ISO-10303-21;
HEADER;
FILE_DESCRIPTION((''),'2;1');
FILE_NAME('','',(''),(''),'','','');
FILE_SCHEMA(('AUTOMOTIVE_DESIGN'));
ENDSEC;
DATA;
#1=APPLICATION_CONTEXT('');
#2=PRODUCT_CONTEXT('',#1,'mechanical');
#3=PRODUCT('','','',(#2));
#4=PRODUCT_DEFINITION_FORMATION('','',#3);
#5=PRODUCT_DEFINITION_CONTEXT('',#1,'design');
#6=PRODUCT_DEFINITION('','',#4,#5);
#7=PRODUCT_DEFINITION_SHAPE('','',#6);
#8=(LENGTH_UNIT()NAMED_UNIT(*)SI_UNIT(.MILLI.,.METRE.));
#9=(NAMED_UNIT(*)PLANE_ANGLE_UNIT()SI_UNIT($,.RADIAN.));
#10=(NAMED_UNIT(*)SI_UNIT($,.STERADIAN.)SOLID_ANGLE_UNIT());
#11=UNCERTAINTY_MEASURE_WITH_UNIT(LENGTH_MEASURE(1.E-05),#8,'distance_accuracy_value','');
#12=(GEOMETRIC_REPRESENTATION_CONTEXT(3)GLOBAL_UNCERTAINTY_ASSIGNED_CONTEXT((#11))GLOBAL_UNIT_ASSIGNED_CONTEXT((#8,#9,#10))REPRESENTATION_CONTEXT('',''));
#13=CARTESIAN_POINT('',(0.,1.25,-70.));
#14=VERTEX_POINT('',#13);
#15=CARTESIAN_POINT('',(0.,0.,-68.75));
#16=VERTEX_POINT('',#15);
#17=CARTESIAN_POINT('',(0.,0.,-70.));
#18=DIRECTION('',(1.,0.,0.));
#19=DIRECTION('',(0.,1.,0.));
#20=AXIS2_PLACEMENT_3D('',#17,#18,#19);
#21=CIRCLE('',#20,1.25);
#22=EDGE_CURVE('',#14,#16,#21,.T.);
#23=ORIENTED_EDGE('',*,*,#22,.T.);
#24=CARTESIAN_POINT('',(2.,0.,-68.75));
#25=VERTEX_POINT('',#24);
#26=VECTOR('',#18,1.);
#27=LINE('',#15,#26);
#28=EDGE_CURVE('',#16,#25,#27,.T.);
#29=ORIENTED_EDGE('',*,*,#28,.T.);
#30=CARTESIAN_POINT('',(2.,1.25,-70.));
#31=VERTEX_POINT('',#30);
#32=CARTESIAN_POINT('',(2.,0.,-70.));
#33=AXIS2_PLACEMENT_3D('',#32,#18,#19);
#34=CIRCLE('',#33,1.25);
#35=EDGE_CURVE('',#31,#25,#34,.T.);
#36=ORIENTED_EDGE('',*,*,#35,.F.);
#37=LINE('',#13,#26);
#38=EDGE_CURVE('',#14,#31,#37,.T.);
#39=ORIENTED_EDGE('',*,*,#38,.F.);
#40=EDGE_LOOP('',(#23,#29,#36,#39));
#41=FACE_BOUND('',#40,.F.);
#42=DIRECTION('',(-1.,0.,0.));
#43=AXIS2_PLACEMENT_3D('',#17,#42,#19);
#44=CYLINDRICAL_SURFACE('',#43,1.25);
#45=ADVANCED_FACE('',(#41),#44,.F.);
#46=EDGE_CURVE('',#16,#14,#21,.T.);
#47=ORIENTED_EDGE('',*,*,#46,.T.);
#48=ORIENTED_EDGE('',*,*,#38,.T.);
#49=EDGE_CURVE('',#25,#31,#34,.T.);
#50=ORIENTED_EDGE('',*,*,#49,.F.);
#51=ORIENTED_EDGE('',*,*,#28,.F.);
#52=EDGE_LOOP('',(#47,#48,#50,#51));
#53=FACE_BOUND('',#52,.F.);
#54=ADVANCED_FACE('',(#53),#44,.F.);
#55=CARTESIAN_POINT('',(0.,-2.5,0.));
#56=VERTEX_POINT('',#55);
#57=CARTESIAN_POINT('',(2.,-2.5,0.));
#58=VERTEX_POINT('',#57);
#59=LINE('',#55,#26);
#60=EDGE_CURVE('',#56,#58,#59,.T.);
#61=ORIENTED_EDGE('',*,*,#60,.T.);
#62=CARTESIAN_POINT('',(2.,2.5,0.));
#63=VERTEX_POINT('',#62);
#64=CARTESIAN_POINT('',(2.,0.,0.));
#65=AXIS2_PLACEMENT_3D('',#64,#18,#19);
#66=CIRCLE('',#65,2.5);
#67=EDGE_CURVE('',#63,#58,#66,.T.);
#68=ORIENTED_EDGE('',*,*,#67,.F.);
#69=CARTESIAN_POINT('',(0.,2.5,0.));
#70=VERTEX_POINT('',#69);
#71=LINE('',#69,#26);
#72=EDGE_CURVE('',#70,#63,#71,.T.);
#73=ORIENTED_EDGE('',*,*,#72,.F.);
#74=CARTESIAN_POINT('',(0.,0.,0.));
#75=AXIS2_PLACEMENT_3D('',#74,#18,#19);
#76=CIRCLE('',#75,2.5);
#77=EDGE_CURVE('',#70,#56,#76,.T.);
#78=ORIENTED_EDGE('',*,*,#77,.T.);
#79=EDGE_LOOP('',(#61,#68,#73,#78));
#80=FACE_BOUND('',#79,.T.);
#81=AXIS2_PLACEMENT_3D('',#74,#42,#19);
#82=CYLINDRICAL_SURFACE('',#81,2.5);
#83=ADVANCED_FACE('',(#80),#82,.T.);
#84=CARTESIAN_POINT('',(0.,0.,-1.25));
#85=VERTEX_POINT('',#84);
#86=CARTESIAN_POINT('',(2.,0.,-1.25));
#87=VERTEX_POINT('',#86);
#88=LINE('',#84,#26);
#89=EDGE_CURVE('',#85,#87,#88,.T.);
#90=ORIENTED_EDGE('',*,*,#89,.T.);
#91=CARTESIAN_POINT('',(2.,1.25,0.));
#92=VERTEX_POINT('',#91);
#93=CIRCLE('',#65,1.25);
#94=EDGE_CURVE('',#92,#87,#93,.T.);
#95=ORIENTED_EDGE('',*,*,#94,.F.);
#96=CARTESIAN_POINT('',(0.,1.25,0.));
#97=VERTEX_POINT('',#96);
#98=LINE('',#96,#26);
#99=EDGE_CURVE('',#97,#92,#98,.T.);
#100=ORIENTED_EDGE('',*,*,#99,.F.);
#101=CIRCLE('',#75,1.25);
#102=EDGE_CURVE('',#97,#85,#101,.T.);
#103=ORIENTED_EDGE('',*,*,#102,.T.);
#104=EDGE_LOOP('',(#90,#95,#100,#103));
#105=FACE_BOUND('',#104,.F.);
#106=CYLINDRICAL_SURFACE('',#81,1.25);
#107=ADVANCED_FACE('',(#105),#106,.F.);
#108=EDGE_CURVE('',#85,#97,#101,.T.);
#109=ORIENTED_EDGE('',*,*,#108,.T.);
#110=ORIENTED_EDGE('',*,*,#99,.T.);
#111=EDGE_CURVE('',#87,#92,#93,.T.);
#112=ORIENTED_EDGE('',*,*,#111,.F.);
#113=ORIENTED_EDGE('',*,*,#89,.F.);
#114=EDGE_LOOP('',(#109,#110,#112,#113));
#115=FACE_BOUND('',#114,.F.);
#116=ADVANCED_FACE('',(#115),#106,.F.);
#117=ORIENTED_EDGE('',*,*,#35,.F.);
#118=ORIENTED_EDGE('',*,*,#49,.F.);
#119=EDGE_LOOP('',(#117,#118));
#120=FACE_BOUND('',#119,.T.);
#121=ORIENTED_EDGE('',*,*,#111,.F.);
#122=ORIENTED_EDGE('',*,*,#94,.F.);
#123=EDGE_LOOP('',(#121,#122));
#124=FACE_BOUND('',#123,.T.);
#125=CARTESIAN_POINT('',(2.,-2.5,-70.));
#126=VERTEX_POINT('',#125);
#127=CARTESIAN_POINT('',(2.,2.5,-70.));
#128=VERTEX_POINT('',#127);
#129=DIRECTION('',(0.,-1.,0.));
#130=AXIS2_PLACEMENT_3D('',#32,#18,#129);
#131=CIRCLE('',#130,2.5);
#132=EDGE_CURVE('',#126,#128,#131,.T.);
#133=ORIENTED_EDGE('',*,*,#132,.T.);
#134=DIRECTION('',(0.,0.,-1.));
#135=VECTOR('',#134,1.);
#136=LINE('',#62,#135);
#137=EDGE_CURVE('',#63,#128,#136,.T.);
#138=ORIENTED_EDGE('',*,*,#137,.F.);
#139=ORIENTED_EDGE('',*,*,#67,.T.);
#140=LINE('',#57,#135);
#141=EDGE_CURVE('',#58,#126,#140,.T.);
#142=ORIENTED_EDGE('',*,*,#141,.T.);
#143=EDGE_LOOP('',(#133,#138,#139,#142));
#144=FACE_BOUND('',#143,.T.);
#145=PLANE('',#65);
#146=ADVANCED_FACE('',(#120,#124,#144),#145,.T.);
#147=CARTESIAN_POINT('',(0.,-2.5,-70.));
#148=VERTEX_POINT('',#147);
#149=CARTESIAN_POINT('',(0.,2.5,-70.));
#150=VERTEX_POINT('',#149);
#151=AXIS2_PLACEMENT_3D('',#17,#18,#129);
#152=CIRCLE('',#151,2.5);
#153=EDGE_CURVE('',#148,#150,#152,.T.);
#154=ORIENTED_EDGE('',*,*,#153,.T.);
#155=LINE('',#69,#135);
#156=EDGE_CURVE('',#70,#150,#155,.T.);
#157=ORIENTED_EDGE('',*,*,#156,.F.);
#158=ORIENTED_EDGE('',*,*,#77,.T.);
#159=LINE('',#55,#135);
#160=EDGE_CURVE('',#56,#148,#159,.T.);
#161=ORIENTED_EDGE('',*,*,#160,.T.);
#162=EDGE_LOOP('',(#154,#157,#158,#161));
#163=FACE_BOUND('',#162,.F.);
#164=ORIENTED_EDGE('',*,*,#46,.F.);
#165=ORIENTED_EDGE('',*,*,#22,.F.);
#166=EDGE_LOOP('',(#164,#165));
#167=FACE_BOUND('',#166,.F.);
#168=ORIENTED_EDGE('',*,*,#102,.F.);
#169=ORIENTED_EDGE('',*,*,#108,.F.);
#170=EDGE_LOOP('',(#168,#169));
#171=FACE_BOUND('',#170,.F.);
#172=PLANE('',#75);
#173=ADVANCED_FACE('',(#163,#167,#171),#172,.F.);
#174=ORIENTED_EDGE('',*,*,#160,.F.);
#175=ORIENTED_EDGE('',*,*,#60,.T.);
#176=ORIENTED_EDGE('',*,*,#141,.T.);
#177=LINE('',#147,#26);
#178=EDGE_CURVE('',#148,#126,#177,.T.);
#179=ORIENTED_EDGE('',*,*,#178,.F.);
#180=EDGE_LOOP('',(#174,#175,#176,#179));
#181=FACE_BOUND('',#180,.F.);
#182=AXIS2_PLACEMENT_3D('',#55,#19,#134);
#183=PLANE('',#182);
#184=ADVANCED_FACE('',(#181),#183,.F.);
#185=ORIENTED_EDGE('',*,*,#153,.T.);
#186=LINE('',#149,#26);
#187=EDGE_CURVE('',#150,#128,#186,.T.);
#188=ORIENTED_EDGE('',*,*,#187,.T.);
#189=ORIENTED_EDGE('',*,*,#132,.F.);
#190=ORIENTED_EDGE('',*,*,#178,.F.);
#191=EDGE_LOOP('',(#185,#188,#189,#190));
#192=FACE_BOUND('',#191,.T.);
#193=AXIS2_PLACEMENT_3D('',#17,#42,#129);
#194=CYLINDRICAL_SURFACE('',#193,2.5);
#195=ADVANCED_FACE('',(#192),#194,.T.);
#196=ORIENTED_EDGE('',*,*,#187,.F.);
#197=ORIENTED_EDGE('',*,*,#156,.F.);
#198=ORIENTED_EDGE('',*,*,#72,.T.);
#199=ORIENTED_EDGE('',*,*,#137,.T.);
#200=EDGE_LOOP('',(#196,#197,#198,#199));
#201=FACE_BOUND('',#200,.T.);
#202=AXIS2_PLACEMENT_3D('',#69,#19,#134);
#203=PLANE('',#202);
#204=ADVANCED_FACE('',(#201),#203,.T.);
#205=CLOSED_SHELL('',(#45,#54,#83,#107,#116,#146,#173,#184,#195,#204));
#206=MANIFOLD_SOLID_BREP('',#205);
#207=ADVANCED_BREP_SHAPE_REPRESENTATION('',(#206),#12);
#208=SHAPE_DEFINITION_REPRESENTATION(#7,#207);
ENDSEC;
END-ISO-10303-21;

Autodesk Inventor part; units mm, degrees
ref_plane "YZ Plane" through (0, 0, 0) normal (1, 0, 0) x (0, 1, 0)
ref_plane "XZ Plane" through (0, 0, 0) normal (0, 1, 0) x (-1, 0, 0)
ref_plane "XY Plane" through (0, 0, 0) normal (0, 0, 1) x (1, 0, 0)
sketch "Sketch1" plane through (0, 0, 0) normal (1, 0, 0) x (0, 1, 0)
  line L0 (0, 0) -> (0, -70)
  arc A0 (2.5, 0) -> (-2.5, 0) centre (0, 0) ccw
  arc A1 (-2.5, -70) -> (2.5, -70) centre (0, -70) ccw
  line L1 (2.5, 0) -> (2.5, -70)
  line L2 (-2.5, 0) -> (-2.5, -70)
  circle A2 centre (0, 0) radius 1.25
  circle A3 centre (0, -70) radius 1.25
  dimension "d0" = 70
  dimension "d1" = 5
  dimension "d2" = 5
  dimension "d3" = 2.5
  dimension "d4" = 2.5
extrude "Extrusion1" add sketch "Sketch1" along normal blind 2
properties part number "base3"
